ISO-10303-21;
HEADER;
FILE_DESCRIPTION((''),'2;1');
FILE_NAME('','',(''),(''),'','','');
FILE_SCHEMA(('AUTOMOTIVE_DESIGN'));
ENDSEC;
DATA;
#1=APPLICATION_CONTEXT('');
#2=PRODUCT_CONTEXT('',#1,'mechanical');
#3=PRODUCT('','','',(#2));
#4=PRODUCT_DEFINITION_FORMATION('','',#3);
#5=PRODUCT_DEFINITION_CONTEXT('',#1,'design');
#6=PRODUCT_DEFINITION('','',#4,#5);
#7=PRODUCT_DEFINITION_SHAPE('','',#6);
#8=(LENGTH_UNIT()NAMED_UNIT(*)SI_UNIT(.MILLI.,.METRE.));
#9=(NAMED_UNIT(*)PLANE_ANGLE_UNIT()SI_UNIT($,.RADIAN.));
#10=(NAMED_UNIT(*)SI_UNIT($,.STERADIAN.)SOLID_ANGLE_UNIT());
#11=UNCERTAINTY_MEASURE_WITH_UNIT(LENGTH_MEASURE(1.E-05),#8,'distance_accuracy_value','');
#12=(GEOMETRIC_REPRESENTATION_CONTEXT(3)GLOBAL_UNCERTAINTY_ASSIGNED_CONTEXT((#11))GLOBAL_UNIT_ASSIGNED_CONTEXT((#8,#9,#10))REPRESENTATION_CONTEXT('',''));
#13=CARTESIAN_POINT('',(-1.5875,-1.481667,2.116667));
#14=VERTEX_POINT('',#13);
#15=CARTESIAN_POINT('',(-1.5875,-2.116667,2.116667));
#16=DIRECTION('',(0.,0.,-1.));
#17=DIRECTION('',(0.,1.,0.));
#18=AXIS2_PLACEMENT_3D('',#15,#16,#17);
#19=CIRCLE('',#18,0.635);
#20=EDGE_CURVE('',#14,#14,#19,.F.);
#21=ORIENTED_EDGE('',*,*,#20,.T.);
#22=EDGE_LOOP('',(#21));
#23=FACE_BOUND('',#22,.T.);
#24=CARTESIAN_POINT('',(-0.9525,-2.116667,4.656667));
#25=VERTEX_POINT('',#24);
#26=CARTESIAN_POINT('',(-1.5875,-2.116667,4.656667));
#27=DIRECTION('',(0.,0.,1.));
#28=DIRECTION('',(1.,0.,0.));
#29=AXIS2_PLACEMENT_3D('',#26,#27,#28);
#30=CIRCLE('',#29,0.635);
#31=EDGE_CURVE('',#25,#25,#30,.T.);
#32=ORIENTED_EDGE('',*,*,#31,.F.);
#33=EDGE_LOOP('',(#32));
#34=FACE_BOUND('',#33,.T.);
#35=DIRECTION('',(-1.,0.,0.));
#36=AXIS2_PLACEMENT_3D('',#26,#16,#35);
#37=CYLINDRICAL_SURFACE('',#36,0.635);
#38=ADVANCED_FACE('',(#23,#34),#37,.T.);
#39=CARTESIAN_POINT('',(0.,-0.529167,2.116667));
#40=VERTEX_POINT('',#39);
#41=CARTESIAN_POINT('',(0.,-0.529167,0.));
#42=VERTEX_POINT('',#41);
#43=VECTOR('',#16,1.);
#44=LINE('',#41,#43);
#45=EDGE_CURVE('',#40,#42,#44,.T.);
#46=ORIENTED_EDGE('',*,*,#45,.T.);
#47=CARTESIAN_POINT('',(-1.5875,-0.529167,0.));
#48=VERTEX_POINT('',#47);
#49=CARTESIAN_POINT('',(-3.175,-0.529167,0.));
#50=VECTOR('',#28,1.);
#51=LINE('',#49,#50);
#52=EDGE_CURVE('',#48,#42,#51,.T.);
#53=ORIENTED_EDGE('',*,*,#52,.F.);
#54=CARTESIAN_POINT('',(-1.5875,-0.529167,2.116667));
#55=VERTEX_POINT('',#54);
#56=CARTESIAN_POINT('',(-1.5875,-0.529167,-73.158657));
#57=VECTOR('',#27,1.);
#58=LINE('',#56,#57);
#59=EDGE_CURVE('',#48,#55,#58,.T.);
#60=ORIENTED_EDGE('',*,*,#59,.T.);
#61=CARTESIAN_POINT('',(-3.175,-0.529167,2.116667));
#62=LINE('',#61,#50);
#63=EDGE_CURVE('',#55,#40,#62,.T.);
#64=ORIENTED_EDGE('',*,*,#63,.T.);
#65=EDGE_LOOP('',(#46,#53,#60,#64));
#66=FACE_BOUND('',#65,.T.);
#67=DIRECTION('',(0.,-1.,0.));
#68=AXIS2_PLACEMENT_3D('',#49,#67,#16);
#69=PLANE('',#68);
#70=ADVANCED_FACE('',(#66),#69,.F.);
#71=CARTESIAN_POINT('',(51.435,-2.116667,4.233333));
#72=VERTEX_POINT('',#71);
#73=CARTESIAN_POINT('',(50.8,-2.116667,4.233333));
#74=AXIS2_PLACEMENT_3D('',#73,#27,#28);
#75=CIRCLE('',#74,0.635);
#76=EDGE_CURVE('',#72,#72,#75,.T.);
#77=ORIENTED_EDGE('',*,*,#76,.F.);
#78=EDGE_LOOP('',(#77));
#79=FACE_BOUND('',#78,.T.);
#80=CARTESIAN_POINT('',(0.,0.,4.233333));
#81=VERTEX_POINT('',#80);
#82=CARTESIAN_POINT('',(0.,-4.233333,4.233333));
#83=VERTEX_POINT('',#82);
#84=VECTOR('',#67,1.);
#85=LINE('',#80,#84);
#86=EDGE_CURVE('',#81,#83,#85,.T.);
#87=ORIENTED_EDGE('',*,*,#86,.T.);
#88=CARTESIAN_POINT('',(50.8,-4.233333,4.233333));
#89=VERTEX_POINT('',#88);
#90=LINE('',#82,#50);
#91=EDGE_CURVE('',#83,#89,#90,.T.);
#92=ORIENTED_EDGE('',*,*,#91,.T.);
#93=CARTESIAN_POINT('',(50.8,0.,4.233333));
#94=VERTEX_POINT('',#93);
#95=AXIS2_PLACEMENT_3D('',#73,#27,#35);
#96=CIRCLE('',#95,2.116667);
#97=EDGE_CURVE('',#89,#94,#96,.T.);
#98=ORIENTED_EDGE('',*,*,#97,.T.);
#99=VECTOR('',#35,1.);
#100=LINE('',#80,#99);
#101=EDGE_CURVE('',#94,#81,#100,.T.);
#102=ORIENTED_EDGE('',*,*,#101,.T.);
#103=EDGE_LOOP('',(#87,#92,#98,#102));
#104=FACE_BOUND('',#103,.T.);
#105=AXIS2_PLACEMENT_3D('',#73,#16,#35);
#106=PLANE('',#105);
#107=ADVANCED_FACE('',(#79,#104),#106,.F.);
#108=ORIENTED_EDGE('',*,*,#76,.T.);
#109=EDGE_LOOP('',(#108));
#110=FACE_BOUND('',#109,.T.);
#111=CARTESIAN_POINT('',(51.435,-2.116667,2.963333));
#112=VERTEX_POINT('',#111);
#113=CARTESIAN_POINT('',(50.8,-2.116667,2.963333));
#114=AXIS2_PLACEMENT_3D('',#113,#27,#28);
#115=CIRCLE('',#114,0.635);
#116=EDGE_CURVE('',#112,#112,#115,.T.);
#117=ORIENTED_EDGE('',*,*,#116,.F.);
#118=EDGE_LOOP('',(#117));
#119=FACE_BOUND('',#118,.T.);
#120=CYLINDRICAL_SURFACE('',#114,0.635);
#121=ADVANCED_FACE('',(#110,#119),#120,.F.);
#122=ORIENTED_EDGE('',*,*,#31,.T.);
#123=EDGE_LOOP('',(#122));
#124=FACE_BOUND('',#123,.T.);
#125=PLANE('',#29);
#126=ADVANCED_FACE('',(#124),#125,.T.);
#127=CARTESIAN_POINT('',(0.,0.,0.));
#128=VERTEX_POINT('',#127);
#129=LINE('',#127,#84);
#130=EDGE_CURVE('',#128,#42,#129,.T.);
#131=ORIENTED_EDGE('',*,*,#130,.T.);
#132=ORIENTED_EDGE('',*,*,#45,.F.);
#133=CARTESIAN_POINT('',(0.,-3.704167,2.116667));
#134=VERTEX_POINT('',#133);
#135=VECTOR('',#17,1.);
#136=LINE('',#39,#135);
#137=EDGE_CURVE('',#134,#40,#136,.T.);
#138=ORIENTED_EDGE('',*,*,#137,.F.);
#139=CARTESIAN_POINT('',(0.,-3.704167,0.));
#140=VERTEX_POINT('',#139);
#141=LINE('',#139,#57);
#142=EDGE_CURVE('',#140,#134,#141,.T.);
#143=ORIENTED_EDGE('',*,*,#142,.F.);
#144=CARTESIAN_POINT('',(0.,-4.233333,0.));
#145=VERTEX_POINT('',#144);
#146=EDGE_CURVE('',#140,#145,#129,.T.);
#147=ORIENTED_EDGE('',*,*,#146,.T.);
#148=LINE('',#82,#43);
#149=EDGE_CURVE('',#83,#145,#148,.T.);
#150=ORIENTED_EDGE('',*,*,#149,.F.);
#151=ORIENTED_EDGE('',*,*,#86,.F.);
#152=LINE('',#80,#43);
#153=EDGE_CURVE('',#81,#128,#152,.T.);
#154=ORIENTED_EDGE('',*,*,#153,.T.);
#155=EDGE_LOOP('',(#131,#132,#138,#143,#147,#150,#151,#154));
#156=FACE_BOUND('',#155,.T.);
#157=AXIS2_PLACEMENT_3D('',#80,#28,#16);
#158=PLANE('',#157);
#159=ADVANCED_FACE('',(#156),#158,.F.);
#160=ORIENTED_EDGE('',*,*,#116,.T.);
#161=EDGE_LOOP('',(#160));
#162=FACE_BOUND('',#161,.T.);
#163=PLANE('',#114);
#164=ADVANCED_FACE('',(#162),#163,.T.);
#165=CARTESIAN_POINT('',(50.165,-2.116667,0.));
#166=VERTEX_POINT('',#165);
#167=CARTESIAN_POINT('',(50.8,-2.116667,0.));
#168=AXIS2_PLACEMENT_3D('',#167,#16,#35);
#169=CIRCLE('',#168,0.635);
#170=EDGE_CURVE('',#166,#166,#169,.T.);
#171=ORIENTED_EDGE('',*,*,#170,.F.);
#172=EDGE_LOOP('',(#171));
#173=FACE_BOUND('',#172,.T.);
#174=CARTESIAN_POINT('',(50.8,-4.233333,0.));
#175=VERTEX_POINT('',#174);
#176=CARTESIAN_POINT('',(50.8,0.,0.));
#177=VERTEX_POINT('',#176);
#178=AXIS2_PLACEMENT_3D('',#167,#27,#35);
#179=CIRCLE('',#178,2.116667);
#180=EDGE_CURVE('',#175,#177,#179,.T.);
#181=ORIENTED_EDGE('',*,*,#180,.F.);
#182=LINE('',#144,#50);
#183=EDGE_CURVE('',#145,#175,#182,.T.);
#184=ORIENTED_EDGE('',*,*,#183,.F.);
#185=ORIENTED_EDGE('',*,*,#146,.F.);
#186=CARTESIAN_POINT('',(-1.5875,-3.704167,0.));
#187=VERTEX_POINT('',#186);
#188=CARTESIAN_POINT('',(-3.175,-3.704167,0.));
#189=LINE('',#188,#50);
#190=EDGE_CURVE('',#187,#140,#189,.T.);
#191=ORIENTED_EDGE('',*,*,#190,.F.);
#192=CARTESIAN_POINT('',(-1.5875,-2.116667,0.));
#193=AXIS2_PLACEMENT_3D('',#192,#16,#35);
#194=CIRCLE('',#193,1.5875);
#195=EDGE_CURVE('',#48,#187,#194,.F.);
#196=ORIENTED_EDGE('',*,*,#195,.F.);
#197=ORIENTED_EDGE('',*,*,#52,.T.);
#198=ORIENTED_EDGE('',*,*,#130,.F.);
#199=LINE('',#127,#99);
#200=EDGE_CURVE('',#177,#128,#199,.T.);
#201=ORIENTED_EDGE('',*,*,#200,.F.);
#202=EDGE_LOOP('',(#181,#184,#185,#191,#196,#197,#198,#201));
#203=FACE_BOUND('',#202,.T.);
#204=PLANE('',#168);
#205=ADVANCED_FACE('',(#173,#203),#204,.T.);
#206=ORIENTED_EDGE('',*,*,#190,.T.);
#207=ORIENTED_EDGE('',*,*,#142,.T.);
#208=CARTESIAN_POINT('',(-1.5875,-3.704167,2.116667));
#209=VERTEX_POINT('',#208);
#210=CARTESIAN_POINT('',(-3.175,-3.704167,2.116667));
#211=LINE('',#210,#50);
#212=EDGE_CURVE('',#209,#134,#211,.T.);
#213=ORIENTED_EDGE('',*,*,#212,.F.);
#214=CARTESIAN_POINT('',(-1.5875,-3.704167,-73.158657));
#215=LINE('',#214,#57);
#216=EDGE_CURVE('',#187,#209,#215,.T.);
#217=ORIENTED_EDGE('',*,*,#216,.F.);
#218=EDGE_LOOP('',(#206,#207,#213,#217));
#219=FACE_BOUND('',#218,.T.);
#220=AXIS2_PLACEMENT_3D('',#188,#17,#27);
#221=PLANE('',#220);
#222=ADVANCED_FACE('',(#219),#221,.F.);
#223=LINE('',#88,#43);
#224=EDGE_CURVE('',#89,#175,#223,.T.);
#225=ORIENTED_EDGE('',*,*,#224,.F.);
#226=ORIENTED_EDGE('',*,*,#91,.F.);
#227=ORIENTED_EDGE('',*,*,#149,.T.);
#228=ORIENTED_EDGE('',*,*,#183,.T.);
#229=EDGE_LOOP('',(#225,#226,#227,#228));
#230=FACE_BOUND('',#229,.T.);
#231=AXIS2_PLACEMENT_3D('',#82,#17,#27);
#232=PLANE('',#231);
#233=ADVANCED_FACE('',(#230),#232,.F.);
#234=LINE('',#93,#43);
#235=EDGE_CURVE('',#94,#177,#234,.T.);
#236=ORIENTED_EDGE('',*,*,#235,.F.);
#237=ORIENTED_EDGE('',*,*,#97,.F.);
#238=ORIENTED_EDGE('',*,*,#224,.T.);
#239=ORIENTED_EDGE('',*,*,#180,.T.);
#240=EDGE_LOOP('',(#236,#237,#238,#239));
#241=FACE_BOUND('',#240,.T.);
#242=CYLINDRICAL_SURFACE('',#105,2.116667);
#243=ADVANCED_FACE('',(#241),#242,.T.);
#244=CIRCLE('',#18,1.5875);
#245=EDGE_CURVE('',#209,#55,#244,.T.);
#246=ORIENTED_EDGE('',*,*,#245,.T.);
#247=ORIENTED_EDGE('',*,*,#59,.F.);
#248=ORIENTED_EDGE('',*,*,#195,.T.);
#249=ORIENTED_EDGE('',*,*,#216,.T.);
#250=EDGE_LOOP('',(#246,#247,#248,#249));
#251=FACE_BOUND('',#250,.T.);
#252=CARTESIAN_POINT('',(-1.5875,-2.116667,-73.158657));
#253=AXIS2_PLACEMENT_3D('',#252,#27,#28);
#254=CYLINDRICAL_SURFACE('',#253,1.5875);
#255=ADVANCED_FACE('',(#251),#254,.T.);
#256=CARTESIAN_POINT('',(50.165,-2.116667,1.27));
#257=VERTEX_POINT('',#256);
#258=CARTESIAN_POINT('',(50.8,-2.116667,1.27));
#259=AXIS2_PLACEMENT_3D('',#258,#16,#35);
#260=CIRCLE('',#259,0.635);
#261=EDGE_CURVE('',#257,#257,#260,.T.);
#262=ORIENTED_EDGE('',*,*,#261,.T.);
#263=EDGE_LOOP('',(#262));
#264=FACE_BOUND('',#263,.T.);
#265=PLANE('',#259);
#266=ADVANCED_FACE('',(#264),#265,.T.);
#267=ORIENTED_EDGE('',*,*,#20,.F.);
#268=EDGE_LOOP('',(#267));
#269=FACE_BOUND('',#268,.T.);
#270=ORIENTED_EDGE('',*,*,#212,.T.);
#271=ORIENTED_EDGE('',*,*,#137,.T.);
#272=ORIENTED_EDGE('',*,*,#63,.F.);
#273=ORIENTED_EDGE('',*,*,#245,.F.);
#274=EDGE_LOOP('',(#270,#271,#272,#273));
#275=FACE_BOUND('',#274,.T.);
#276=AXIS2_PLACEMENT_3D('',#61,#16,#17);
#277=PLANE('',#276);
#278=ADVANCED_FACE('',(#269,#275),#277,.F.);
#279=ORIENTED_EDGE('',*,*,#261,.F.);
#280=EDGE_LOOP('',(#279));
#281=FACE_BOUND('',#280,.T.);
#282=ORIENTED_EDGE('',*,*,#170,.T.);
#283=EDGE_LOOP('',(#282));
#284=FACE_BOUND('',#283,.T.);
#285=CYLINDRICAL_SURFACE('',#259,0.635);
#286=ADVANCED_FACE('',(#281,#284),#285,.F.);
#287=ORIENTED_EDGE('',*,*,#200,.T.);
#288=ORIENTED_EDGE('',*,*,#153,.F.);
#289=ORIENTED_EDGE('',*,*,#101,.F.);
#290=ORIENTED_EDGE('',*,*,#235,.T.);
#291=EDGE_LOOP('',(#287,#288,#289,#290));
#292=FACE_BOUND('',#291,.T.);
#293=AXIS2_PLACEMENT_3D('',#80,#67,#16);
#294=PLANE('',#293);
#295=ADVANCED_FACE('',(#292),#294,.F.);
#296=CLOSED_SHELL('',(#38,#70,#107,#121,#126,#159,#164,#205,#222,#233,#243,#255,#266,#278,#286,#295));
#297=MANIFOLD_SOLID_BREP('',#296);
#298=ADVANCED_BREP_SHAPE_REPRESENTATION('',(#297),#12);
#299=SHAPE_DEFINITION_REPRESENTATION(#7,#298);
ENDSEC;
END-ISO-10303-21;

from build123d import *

# Parameters (mm, degrees)
BOSS_EXTRUDE3_DEPTH = 4.233333333
SKETCH4_W           = 2.116666667
SKETCH4_H           = 3.175
BOSS_EXTRUDE5_DEPTH = 3.175
CUT_EXTRUDE1_START  = -2.116666667
CUT_EXTRUDE1_DEPTH  = 2.116666667
SKETCH6_R           = 0.635
BOSS_EXTRUDE6_DEPTH = 2.54
SKETCH7_R           = 0.635
CUT_EXTRUDE2_DEPTH  = 1.27
CUT_EXTRUDE3_START  = -1.27
SKETCH8_R           = 0.635
CUT_EXTRUDE3_DEPTH  = 1.27


# Read off the part's stored shape, not the designer's step: Cut-Extrude1
with BuildPart() as part:
    # Sketch3 → Boss-Extrude3 (new body)
    with BuildSketch(Plane.XY):
        with BuildLine():
            Line((0, 0), (50.8, 0))
            ThreePointArc((50.8, 0), (52.916666667, -2.116666667), (50.8, -4.233333333))
            Line((50.8, -4.233333333), (0, -4.233333333))
            Line((0, -4.233333333), (0, 0))
        make_face()
    extrude(amount=BOSS_EXTRUDE3_DEPTH)

    # Sketch4 → Boss-Extrude5 (add)
    with BuildSketch(Plane.ZY):
        with Locations((1.058333334, -2.116666667)):
            Rectangle(SKETCH4_W, SKETCH4_H)
    extrude(amount=BOSS_EXTRUDE5_DEPTH)

    # Cut-Extrude1 outline → Cut-Extrude1 (cut)
    with BuildSketch(Plane(origin=(0, 0, 0), x_dir=(-1, 0, 0), z_dir=(0, 0, -1)).offset(CUT_EXTRUDE1_START)):
        with BuildLine():
            Line((3.175, -0.529166667), (1.5875, -0.529166667))
            ThreePointArc((1.5875, -0.529166667), (2.710032015, -0.994134652), (3.175, -2.116666667))
            Line((3.175, -2.116666667), (3.175, -0.529166667))
        make_face()
        with BuildLine():
            Line((3.175, -3.704166667), (3.175, -2.116666667))
            ThreePointArc((3.175, -2.116666667), (2.710032015, -3.239198682), (1.5875, -3.704166667))
            Line((1.5875, -3.704166667), (3.175, -3.704166667))
        make_face()
    extrude(amount=CUT_EXTRUDE1_DEPTH, mode=Mode.SUBTRACT)

    # Sketch6 → Boss-Extrude6 (add)
    with BuildSketch(Plane.XY.offset(2.116666667)):
        with Locations(Location((-1.5875, -2.116666667, 0), (0, 0, 90))):
            Circle(SKETCH6_R)
    extrude(amount=BOSS_EXTRUDE6_DEPTH)

    # Sketch7 → Cut-Extrude2 (cut)
    with BuildSketch(Plane.XY.offset(4.233333333)):
        with Locations((50.8, -2.116666667)):
            Circle(SKETCH7_R)
    extrude(amount=-CUT_EXTRUDE2_DEPTH, mode=Mode.SUBTRACT)

    # Sketch8 → Cut-Extrude3 (cut)
    with BuildSketch(Plane(origin=(0, 0, 0), x_dir=(-1, 0, 0), z_dir=(0, 0, -1)).offset(CUT_EXTRUDE3_START)):
        with Locations(Location((-50.8, -2.116666667, 0), (0, 0, 180))):
            Circle(SKETCH8_R)
    extrude(amount=CUT_EXTRUDE3_DEPTH, mode=Mode.SUBTRACT)


solid = part.part
